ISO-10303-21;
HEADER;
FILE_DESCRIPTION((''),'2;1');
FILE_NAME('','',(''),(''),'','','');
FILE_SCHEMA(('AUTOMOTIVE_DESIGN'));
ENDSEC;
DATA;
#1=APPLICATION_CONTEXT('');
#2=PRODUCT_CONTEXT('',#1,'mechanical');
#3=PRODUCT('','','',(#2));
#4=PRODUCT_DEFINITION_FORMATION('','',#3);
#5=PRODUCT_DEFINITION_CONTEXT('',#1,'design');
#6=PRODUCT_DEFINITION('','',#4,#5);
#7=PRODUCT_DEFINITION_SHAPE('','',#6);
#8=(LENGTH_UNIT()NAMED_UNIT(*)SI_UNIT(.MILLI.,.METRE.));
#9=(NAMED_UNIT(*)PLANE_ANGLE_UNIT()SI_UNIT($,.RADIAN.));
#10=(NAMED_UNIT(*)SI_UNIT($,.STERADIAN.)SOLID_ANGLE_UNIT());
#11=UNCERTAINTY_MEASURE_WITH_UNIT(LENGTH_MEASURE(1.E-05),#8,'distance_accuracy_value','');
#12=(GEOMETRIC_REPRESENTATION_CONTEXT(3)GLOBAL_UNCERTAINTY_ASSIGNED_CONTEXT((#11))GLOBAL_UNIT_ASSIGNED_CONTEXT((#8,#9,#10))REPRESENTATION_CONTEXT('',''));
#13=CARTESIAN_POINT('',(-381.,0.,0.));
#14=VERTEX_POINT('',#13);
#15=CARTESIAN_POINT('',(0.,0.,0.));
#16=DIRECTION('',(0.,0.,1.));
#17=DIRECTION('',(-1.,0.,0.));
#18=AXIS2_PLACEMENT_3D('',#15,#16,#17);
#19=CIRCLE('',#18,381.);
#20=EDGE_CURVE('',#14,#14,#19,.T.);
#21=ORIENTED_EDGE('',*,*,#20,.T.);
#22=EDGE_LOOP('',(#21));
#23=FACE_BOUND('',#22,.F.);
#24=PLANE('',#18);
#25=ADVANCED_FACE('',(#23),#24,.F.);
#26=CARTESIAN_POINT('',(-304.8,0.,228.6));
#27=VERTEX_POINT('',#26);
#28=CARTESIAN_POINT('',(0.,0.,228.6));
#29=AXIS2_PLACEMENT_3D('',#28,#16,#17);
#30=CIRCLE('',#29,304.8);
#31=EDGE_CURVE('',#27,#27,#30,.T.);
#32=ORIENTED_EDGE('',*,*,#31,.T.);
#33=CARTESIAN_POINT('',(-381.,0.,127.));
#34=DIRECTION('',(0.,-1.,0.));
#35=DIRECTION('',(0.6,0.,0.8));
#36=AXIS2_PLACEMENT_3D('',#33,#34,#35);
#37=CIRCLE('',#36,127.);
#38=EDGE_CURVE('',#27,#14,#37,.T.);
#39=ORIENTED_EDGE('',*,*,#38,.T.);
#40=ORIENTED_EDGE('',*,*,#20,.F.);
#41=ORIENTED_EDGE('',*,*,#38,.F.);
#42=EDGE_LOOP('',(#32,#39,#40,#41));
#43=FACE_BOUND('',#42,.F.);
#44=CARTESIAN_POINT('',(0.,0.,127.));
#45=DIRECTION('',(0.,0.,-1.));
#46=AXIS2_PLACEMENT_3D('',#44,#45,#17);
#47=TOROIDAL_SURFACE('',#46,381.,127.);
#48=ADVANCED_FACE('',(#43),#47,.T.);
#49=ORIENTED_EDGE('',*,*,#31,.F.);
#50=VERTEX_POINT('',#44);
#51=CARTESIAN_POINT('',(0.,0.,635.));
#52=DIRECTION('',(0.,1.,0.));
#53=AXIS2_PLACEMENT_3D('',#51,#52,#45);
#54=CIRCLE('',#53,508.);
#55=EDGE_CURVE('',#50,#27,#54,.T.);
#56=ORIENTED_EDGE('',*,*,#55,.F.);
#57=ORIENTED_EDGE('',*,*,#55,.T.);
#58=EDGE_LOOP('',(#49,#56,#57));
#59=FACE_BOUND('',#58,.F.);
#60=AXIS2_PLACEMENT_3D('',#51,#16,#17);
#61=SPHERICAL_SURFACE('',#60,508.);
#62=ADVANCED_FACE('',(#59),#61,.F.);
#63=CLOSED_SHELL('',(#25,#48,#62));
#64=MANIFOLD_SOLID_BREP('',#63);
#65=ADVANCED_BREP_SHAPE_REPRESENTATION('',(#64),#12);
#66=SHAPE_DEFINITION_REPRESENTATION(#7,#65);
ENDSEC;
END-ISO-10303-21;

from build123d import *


# Not quite as in the source:
# - the program builds the solid bodies; features that only make, move or delete a surface that nothing else refers to are left out


with BuildPart() as f1:
    # F0 (on Front) → F1 (revolve)
    with BuildSketch(Plane.XZ):
        with BuildLine():
            ThreePointArc((0, 127), (-160.6437051366, 153.0688845903), (-304.8, 228.6))
            ThreePointArc((-304.8, 228.6), (-501.4827788524, 167.1609262841), (-381, 0))
            Line((-381, 0), (0, 0))
            Line((0, 0), (0, 127))
        make_face()
    revolve(axis=Axis((0, 0, 63.5), (0, 0, 1)))


solid = f1.part
